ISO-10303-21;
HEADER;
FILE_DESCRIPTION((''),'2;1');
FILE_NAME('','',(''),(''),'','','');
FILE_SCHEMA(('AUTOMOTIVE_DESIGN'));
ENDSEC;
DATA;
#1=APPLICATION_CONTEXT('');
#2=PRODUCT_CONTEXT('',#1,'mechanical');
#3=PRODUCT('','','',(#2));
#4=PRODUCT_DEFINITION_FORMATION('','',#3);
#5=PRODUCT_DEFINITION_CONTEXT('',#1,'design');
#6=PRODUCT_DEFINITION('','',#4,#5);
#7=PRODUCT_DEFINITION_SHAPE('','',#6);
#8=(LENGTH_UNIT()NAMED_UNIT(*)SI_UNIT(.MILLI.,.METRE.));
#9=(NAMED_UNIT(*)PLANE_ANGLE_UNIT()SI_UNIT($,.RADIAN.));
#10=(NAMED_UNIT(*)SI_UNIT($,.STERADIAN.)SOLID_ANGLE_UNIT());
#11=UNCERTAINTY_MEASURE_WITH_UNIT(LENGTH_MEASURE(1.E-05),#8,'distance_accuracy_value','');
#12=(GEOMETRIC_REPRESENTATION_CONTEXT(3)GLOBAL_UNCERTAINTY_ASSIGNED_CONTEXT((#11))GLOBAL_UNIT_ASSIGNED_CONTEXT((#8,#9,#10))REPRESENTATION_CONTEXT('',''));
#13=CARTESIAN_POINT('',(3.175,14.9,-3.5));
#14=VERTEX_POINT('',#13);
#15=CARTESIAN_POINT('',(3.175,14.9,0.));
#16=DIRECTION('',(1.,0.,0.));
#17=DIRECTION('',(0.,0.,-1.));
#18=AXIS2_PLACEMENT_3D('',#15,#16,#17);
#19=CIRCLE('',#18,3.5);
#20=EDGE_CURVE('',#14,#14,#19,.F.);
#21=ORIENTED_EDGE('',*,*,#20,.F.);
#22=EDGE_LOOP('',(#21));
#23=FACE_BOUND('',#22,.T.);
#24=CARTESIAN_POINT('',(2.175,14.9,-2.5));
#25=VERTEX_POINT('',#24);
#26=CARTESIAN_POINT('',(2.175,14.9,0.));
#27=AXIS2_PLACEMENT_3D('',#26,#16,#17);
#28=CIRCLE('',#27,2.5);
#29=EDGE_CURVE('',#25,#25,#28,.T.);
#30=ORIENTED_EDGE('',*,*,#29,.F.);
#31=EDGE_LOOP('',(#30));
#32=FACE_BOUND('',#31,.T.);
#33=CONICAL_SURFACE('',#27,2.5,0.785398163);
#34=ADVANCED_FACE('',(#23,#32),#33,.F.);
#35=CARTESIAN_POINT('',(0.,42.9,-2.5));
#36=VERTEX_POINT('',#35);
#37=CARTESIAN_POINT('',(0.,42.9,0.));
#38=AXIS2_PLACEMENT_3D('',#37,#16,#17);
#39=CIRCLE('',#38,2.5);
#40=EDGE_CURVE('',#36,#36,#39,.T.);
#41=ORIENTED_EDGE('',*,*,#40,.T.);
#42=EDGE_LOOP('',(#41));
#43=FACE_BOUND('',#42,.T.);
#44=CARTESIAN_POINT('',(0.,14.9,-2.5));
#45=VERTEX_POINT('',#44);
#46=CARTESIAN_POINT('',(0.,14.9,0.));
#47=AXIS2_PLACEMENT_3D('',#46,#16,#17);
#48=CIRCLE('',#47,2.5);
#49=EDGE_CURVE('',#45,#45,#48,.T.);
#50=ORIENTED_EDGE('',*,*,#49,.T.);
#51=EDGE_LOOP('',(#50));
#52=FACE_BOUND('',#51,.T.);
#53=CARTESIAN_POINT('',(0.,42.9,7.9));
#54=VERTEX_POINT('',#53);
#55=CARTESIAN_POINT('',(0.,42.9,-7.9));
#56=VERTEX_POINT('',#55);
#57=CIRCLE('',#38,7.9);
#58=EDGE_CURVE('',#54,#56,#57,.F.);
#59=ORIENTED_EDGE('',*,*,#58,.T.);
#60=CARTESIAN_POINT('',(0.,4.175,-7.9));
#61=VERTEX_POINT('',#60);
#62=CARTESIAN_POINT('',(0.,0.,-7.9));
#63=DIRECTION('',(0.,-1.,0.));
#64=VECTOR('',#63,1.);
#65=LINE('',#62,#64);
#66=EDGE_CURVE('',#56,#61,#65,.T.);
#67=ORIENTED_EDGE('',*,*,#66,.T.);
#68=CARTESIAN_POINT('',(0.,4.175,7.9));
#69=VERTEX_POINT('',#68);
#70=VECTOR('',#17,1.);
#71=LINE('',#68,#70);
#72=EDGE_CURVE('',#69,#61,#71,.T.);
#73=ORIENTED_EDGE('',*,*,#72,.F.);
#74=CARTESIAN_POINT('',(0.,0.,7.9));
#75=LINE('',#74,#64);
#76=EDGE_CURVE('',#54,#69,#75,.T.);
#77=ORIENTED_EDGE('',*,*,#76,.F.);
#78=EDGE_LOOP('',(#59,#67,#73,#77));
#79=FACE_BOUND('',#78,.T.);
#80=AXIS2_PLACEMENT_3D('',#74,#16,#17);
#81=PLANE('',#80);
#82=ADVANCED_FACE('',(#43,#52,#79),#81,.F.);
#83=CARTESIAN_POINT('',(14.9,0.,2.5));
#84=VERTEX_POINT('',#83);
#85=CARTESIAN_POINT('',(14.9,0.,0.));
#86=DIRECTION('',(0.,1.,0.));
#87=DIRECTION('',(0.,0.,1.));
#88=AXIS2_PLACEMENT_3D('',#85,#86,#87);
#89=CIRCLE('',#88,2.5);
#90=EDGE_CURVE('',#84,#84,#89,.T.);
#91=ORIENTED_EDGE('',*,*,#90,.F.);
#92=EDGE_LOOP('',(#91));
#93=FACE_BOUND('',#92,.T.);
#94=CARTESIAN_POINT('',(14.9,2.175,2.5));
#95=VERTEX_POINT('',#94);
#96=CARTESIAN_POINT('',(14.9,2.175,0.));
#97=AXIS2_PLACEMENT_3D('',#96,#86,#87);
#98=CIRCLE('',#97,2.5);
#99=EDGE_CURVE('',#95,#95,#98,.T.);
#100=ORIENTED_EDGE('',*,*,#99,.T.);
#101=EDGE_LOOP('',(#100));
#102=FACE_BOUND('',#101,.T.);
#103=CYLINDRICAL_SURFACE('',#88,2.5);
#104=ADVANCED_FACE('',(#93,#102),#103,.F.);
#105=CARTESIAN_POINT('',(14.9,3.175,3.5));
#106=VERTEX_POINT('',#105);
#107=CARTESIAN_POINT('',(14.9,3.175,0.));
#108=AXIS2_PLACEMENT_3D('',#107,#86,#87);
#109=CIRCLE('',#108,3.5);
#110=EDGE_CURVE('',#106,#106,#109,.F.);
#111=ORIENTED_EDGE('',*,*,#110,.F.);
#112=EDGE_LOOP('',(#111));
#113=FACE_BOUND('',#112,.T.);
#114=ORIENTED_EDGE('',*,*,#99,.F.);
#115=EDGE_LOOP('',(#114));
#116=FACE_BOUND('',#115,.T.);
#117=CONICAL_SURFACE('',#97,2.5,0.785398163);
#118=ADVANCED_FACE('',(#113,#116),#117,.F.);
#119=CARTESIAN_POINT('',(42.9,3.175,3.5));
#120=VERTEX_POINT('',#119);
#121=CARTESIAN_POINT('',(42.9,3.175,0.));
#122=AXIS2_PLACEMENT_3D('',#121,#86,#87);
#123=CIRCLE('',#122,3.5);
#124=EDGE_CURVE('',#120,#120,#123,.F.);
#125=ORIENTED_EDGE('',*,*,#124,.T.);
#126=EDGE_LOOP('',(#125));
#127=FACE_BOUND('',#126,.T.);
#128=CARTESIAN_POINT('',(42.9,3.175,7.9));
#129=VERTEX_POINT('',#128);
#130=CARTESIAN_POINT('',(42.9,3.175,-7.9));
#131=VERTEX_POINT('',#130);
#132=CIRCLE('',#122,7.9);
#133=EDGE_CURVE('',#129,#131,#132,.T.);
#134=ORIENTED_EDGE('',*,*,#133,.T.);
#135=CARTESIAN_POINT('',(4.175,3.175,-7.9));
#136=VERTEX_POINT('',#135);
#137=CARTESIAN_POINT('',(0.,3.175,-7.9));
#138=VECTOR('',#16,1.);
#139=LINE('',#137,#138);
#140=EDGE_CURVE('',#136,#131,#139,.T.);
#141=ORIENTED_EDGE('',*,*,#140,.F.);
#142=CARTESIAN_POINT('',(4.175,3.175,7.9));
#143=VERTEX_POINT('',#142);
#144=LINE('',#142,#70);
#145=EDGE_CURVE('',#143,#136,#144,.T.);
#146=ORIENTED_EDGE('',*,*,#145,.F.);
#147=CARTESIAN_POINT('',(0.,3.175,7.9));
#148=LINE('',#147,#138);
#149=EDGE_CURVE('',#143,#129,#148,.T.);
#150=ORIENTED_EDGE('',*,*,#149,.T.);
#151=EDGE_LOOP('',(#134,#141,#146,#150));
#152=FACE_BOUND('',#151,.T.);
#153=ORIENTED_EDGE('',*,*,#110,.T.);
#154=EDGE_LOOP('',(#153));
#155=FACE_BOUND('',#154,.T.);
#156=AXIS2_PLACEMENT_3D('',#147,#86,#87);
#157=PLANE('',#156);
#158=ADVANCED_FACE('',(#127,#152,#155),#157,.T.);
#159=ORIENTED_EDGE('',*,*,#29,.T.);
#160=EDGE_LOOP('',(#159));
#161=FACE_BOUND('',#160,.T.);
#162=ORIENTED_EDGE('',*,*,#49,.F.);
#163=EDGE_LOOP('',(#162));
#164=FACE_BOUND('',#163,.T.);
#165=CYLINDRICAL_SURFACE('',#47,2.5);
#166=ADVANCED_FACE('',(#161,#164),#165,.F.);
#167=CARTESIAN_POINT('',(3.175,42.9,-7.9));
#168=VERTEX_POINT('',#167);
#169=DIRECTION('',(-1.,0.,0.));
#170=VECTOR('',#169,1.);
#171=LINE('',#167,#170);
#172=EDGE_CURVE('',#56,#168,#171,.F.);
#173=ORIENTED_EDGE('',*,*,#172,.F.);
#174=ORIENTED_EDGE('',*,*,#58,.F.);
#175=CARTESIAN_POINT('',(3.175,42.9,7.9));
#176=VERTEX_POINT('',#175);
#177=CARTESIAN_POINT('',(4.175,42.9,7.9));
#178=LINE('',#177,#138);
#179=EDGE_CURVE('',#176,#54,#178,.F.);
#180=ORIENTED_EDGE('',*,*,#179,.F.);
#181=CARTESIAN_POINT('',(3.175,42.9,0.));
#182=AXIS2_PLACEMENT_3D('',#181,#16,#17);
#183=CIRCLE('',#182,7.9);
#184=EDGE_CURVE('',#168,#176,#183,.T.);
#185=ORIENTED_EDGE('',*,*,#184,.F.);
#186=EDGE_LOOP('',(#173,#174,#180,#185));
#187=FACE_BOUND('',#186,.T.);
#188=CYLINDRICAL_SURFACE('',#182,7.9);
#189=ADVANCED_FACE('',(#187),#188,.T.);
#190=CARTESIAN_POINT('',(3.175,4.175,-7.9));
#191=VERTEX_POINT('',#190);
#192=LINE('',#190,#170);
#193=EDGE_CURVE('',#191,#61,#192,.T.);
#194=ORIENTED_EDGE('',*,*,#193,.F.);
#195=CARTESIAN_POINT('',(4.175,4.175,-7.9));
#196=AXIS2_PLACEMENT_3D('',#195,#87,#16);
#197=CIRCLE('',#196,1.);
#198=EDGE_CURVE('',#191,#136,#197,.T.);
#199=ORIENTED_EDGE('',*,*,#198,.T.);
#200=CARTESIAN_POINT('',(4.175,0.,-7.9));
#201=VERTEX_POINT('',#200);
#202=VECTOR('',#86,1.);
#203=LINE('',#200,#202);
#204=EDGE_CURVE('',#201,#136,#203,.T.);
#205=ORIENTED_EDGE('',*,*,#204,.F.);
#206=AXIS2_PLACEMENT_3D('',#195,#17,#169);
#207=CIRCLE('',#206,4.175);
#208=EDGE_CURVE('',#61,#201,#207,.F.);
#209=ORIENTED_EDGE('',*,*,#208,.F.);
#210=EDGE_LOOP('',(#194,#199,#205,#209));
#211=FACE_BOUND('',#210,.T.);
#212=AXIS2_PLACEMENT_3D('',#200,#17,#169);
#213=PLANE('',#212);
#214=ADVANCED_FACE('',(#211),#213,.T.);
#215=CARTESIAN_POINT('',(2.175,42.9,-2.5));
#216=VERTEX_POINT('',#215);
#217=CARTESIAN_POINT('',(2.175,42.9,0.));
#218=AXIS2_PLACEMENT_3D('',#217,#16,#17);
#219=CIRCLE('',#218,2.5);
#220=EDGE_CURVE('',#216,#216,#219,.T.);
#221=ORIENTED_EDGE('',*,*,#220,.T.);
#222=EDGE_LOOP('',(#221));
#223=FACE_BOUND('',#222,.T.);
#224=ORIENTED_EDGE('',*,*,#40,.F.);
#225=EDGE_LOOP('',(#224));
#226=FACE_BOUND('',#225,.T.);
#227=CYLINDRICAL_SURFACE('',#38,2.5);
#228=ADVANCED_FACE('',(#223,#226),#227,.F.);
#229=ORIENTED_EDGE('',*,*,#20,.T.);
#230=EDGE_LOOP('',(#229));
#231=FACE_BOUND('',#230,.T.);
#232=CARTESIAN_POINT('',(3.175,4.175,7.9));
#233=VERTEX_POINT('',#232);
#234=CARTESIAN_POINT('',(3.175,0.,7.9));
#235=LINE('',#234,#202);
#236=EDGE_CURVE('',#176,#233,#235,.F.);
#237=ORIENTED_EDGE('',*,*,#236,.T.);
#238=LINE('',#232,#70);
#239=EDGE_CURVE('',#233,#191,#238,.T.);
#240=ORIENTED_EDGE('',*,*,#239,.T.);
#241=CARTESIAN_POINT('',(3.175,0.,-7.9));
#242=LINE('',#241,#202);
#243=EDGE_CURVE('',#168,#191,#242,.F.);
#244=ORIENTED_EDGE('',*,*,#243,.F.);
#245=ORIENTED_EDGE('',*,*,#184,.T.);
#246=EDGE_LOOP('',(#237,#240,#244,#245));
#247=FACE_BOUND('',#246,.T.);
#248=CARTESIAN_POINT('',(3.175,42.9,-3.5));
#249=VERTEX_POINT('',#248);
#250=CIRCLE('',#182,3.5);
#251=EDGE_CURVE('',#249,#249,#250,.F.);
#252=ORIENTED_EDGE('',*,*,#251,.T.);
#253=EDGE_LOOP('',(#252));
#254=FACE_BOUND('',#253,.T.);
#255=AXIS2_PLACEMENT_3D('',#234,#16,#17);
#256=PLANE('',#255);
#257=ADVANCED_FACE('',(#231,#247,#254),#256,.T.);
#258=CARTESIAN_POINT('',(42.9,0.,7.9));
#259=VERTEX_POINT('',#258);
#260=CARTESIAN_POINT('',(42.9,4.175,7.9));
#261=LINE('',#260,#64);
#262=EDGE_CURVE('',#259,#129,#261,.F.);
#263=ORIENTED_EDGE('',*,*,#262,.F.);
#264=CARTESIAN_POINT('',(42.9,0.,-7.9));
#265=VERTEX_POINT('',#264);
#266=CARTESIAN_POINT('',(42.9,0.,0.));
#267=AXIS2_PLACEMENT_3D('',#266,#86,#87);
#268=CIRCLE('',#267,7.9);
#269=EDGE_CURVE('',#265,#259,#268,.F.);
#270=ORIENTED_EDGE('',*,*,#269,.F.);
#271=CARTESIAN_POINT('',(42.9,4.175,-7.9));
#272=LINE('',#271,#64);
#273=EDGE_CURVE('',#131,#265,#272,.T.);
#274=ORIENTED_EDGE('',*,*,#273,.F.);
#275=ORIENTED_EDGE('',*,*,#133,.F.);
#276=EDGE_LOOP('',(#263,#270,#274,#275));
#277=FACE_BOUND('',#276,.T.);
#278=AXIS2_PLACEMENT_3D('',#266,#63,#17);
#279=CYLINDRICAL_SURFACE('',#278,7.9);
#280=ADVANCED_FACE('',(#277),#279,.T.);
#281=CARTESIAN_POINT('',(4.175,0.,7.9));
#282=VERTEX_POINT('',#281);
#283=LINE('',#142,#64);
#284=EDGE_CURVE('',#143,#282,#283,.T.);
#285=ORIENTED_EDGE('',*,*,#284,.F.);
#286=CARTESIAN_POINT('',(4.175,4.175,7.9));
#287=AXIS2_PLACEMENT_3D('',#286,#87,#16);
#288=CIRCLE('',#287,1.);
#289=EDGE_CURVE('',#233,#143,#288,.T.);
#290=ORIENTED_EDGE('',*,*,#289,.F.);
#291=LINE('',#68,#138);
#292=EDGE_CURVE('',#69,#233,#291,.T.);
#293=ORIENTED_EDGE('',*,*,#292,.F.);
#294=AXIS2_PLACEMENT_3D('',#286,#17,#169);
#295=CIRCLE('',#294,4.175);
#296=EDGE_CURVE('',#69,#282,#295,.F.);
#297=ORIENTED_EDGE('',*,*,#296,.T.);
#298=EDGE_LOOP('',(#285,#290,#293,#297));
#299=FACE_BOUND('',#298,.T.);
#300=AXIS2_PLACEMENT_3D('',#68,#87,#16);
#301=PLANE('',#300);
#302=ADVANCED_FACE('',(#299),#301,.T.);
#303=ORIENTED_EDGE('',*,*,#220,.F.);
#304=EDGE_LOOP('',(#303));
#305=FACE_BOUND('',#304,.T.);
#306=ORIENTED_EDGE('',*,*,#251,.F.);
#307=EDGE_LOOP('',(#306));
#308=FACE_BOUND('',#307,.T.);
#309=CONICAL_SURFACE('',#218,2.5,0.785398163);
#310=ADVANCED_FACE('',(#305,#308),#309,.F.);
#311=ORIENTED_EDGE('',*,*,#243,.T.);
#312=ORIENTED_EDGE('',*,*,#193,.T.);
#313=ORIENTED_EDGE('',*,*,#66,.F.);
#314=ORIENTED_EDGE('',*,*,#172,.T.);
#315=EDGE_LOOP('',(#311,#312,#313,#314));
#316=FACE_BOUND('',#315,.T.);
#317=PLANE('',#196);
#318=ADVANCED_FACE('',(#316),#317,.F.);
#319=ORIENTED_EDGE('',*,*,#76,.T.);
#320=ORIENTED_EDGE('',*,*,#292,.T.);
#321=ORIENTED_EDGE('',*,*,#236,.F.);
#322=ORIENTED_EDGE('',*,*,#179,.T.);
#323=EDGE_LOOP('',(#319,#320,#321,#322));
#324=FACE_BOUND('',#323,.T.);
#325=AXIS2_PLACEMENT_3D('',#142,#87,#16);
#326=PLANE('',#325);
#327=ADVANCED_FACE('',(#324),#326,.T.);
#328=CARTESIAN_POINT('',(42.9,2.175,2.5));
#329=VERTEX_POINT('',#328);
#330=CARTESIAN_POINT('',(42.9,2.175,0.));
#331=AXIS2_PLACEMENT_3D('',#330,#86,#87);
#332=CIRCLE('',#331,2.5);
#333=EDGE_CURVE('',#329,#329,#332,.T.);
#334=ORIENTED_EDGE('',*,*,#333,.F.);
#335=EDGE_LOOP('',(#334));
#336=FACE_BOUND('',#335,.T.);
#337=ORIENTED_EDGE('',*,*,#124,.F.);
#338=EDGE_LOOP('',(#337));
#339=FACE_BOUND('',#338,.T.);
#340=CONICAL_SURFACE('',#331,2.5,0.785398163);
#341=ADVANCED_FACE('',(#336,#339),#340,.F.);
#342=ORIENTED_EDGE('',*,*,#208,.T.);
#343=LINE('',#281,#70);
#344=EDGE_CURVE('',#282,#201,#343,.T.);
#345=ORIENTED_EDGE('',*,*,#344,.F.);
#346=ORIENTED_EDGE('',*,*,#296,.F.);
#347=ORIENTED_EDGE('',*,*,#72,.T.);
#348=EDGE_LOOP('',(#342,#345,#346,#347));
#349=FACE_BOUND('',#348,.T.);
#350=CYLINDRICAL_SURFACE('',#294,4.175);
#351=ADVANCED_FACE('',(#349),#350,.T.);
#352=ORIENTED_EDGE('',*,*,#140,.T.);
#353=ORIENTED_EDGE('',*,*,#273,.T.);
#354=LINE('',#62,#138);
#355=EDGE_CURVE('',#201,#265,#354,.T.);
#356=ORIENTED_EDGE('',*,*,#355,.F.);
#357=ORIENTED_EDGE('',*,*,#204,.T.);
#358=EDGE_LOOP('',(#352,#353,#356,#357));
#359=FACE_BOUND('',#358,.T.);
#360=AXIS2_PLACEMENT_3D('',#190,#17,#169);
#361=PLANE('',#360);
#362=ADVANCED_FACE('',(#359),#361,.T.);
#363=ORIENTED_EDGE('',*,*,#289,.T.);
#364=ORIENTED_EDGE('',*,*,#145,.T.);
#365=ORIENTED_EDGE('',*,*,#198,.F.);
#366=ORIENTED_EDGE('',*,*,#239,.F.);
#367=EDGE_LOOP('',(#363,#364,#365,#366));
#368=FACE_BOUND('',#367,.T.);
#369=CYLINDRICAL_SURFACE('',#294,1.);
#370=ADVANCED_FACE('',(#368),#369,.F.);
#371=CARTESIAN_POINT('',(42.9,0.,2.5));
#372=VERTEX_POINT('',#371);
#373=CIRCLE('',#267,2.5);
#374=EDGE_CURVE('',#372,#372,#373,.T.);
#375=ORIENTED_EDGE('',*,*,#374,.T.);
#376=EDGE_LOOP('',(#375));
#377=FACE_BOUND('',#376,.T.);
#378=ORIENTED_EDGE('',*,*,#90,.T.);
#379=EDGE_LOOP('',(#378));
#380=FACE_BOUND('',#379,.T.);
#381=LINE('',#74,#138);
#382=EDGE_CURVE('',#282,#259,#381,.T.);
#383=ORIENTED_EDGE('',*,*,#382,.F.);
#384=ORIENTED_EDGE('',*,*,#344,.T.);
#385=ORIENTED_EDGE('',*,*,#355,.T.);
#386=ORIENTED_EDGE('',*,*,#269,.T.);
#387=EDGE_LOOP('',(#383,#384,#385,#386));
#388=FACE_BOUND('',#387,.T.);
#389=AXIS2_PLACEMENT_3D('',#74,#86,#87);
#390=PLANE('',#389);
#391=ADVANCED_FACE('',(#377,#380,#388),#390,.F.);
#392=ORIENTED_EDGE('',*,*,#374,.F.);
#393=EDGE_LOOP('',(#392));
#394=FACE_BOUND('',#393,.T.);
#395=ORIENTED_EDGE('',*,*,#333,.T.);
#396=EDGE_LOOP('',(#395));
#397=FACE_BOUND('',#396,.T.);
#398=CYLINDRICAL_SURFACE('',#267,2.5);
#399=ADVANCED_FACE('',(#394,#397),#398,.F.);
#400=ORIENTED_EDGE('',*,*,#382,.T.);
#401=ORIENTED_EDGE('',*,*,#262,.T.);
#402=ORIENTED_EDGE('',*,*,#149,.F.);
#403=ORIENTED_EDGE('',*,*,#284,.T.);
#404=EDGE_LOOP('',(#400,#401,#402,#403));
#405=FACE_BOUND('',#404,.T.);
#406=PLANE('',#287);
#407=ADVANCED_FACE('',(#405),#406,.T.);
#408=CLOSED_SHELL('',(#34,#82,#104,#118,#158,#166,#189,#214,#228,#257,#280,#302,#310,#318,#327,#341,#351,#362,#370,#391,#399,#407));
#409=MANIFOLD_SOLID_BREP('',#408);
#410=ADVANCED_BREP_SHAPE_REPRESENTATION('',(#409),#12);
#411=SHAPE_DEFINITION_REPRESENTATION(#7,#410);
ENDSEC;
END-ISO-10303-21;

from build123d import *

# Parameters (mm, degrees)
FLANGE_BASE1_DEPTH    = 7.9
FILETE2_RADIUS        = 7.9
FILETE2_LENGTH        = 3.175
FILETE4_RADIUS        = 7.9
FILETE4_LENGTH        = 3.175
ESBO_O6_R             = 2.5
CORTE_EXTRUS_O1_DEPTH = 71.07988745
ESBO_O7_R             = 2.5
CORTE_EXTRUS_O2_DEPTH = 71.07988745
CHANFRO2_SIZE         = 1


# Sheet-metal steps are written as plain solids
with BuildPart() as part:
    # Esboço1 → Flange-base1 (new, symmetric)
    with BuildSketch(Plane.XY):
        with BuildLine():
            Line((50.8, 0), (4.175, 0))
            ThreePointArc((4.175, 0), (1.222829189, 1.222829189), (0, 4.175))
            Line((0, 4.175), (0, 50.8))
            Line((0, 50.8), (3.175, 50.8))
            Line((3.175, 50.8), (3.175, 4.175))
            ThreePointArc((3.175, 4.175), (3.467893219, 3.467893219), (4.175, 3.175))
            Line((4.175, 3.175), (50.8, 3.175))
            Line((50.8, 3.175), (50.8, 0))
        make_face()
    extrude(amount=FLANGE_BASE1_DEPTH, both=True)

    # Filete2: full round fillet: the end face becomes a half cylinder, R = half its width
    filete2_face = Plane((1.5875, 50.8, 0), x_dir=(1, 0, 0), z_dir=(0, 1, 0))  # on the end face: x along it, z out of the body
    filete2_slab = filete2_face.offset(-FILETE2_RADIUS / 2) * Box(FILETE2_LENGTH, 2 * FILETE2_RADIUS, FILETE2_RADIUS, mode=Mode.PRIVATE)  # the body's end, R deep
    filete2_round = Plane((1.5875, 42.9, 0), x_dir=(0, 1, 0), z_dir=(1, 0, 0)) * Cylinder(FILETE2_RADIUS, FILETE2_LENGTH, mode=Mode.PRIVATE)  # its axis R under the face
    add(filete2_slab - filete2_round, mode=Mode.SUBTRACT)

    # Filete4: full round fillet: the end face becomes a half cylinder, R = half its width
    filete4_face = Plane((50.8, 1.5875, 0), x_dir=(0, -1, 0), z_dir=(1, 0, 0))  # on the end face: x along it, z out of the body
    filete4_slab = filete4_face.offset(-FILETE4_RADIUS / 2) * Box(FILETE4_LENGTH, 2 * FILETE4_RADIUS, FILETE4_RADIUS, mode=Mode.PRIVATE)  # the body's end, R deep
    filete4_round = Plane((42.9, 1.5875, 0), x_dir=(1, 0, 0), z_dir=(0, -1, 0)) * Cylinder(FILETE4_RADIUS, FILETE4_LENGTH, mode=Mode.PRIVATE)  # its axis R under the face
    add(filete4_slab - filete4_round, mode=Mode.SUBTRACT)

    # Esboço6 → Corte-extrusão1 (cut, through all)
    with BuildSketch(Plane(origin=(0, 3.175, 0), x_dir=(1, 0, 0), z_dir=(0, 1, 0))):
        with Locations(Location((14.9, 0, 0), (0, 0, 270))):
            Circle(ESBO_O6_R)
        with Locations(Location((42.9, 0, 0), (0, 0, 270))):
            Circle(ESBO_O6_R)
    extrude(amount=-CORTE_EXTRUS_O1_DEPTH, mode=Mode.SUBTRACT)

    # Esboço7 → Corte-extrusão2 (cut, through all)
    with BuildSketch(Plane(origin=(3.175, 0, 0), x_dir=(0, 0, -1), z_dir=(1, 0, 0))):
        with Locations((0, 42.9)):
            Circle(ESBO_O7_R)
        with Locations((0, 14.9)):
            Circle(ESBO_O7_R)
    extrude(amount=-CORTE_EXTRUS_O2_DEPTH, mode=Mode.SUBTRACT)

    # Chanfro2
    chanfro2_edges = [part.edges().sort_by_distance(p)[0] for p in [
        (42.9, 3.175, -2.5),
        (14.9, 3.175, -2.5),
        (3.175, 42.9, 2.5),
        (3.175, 14.9, 2.5),
    ]]
    chamfer(chanfro2_edges, length=CHANFRO2_SIZE)


solid = part.part
